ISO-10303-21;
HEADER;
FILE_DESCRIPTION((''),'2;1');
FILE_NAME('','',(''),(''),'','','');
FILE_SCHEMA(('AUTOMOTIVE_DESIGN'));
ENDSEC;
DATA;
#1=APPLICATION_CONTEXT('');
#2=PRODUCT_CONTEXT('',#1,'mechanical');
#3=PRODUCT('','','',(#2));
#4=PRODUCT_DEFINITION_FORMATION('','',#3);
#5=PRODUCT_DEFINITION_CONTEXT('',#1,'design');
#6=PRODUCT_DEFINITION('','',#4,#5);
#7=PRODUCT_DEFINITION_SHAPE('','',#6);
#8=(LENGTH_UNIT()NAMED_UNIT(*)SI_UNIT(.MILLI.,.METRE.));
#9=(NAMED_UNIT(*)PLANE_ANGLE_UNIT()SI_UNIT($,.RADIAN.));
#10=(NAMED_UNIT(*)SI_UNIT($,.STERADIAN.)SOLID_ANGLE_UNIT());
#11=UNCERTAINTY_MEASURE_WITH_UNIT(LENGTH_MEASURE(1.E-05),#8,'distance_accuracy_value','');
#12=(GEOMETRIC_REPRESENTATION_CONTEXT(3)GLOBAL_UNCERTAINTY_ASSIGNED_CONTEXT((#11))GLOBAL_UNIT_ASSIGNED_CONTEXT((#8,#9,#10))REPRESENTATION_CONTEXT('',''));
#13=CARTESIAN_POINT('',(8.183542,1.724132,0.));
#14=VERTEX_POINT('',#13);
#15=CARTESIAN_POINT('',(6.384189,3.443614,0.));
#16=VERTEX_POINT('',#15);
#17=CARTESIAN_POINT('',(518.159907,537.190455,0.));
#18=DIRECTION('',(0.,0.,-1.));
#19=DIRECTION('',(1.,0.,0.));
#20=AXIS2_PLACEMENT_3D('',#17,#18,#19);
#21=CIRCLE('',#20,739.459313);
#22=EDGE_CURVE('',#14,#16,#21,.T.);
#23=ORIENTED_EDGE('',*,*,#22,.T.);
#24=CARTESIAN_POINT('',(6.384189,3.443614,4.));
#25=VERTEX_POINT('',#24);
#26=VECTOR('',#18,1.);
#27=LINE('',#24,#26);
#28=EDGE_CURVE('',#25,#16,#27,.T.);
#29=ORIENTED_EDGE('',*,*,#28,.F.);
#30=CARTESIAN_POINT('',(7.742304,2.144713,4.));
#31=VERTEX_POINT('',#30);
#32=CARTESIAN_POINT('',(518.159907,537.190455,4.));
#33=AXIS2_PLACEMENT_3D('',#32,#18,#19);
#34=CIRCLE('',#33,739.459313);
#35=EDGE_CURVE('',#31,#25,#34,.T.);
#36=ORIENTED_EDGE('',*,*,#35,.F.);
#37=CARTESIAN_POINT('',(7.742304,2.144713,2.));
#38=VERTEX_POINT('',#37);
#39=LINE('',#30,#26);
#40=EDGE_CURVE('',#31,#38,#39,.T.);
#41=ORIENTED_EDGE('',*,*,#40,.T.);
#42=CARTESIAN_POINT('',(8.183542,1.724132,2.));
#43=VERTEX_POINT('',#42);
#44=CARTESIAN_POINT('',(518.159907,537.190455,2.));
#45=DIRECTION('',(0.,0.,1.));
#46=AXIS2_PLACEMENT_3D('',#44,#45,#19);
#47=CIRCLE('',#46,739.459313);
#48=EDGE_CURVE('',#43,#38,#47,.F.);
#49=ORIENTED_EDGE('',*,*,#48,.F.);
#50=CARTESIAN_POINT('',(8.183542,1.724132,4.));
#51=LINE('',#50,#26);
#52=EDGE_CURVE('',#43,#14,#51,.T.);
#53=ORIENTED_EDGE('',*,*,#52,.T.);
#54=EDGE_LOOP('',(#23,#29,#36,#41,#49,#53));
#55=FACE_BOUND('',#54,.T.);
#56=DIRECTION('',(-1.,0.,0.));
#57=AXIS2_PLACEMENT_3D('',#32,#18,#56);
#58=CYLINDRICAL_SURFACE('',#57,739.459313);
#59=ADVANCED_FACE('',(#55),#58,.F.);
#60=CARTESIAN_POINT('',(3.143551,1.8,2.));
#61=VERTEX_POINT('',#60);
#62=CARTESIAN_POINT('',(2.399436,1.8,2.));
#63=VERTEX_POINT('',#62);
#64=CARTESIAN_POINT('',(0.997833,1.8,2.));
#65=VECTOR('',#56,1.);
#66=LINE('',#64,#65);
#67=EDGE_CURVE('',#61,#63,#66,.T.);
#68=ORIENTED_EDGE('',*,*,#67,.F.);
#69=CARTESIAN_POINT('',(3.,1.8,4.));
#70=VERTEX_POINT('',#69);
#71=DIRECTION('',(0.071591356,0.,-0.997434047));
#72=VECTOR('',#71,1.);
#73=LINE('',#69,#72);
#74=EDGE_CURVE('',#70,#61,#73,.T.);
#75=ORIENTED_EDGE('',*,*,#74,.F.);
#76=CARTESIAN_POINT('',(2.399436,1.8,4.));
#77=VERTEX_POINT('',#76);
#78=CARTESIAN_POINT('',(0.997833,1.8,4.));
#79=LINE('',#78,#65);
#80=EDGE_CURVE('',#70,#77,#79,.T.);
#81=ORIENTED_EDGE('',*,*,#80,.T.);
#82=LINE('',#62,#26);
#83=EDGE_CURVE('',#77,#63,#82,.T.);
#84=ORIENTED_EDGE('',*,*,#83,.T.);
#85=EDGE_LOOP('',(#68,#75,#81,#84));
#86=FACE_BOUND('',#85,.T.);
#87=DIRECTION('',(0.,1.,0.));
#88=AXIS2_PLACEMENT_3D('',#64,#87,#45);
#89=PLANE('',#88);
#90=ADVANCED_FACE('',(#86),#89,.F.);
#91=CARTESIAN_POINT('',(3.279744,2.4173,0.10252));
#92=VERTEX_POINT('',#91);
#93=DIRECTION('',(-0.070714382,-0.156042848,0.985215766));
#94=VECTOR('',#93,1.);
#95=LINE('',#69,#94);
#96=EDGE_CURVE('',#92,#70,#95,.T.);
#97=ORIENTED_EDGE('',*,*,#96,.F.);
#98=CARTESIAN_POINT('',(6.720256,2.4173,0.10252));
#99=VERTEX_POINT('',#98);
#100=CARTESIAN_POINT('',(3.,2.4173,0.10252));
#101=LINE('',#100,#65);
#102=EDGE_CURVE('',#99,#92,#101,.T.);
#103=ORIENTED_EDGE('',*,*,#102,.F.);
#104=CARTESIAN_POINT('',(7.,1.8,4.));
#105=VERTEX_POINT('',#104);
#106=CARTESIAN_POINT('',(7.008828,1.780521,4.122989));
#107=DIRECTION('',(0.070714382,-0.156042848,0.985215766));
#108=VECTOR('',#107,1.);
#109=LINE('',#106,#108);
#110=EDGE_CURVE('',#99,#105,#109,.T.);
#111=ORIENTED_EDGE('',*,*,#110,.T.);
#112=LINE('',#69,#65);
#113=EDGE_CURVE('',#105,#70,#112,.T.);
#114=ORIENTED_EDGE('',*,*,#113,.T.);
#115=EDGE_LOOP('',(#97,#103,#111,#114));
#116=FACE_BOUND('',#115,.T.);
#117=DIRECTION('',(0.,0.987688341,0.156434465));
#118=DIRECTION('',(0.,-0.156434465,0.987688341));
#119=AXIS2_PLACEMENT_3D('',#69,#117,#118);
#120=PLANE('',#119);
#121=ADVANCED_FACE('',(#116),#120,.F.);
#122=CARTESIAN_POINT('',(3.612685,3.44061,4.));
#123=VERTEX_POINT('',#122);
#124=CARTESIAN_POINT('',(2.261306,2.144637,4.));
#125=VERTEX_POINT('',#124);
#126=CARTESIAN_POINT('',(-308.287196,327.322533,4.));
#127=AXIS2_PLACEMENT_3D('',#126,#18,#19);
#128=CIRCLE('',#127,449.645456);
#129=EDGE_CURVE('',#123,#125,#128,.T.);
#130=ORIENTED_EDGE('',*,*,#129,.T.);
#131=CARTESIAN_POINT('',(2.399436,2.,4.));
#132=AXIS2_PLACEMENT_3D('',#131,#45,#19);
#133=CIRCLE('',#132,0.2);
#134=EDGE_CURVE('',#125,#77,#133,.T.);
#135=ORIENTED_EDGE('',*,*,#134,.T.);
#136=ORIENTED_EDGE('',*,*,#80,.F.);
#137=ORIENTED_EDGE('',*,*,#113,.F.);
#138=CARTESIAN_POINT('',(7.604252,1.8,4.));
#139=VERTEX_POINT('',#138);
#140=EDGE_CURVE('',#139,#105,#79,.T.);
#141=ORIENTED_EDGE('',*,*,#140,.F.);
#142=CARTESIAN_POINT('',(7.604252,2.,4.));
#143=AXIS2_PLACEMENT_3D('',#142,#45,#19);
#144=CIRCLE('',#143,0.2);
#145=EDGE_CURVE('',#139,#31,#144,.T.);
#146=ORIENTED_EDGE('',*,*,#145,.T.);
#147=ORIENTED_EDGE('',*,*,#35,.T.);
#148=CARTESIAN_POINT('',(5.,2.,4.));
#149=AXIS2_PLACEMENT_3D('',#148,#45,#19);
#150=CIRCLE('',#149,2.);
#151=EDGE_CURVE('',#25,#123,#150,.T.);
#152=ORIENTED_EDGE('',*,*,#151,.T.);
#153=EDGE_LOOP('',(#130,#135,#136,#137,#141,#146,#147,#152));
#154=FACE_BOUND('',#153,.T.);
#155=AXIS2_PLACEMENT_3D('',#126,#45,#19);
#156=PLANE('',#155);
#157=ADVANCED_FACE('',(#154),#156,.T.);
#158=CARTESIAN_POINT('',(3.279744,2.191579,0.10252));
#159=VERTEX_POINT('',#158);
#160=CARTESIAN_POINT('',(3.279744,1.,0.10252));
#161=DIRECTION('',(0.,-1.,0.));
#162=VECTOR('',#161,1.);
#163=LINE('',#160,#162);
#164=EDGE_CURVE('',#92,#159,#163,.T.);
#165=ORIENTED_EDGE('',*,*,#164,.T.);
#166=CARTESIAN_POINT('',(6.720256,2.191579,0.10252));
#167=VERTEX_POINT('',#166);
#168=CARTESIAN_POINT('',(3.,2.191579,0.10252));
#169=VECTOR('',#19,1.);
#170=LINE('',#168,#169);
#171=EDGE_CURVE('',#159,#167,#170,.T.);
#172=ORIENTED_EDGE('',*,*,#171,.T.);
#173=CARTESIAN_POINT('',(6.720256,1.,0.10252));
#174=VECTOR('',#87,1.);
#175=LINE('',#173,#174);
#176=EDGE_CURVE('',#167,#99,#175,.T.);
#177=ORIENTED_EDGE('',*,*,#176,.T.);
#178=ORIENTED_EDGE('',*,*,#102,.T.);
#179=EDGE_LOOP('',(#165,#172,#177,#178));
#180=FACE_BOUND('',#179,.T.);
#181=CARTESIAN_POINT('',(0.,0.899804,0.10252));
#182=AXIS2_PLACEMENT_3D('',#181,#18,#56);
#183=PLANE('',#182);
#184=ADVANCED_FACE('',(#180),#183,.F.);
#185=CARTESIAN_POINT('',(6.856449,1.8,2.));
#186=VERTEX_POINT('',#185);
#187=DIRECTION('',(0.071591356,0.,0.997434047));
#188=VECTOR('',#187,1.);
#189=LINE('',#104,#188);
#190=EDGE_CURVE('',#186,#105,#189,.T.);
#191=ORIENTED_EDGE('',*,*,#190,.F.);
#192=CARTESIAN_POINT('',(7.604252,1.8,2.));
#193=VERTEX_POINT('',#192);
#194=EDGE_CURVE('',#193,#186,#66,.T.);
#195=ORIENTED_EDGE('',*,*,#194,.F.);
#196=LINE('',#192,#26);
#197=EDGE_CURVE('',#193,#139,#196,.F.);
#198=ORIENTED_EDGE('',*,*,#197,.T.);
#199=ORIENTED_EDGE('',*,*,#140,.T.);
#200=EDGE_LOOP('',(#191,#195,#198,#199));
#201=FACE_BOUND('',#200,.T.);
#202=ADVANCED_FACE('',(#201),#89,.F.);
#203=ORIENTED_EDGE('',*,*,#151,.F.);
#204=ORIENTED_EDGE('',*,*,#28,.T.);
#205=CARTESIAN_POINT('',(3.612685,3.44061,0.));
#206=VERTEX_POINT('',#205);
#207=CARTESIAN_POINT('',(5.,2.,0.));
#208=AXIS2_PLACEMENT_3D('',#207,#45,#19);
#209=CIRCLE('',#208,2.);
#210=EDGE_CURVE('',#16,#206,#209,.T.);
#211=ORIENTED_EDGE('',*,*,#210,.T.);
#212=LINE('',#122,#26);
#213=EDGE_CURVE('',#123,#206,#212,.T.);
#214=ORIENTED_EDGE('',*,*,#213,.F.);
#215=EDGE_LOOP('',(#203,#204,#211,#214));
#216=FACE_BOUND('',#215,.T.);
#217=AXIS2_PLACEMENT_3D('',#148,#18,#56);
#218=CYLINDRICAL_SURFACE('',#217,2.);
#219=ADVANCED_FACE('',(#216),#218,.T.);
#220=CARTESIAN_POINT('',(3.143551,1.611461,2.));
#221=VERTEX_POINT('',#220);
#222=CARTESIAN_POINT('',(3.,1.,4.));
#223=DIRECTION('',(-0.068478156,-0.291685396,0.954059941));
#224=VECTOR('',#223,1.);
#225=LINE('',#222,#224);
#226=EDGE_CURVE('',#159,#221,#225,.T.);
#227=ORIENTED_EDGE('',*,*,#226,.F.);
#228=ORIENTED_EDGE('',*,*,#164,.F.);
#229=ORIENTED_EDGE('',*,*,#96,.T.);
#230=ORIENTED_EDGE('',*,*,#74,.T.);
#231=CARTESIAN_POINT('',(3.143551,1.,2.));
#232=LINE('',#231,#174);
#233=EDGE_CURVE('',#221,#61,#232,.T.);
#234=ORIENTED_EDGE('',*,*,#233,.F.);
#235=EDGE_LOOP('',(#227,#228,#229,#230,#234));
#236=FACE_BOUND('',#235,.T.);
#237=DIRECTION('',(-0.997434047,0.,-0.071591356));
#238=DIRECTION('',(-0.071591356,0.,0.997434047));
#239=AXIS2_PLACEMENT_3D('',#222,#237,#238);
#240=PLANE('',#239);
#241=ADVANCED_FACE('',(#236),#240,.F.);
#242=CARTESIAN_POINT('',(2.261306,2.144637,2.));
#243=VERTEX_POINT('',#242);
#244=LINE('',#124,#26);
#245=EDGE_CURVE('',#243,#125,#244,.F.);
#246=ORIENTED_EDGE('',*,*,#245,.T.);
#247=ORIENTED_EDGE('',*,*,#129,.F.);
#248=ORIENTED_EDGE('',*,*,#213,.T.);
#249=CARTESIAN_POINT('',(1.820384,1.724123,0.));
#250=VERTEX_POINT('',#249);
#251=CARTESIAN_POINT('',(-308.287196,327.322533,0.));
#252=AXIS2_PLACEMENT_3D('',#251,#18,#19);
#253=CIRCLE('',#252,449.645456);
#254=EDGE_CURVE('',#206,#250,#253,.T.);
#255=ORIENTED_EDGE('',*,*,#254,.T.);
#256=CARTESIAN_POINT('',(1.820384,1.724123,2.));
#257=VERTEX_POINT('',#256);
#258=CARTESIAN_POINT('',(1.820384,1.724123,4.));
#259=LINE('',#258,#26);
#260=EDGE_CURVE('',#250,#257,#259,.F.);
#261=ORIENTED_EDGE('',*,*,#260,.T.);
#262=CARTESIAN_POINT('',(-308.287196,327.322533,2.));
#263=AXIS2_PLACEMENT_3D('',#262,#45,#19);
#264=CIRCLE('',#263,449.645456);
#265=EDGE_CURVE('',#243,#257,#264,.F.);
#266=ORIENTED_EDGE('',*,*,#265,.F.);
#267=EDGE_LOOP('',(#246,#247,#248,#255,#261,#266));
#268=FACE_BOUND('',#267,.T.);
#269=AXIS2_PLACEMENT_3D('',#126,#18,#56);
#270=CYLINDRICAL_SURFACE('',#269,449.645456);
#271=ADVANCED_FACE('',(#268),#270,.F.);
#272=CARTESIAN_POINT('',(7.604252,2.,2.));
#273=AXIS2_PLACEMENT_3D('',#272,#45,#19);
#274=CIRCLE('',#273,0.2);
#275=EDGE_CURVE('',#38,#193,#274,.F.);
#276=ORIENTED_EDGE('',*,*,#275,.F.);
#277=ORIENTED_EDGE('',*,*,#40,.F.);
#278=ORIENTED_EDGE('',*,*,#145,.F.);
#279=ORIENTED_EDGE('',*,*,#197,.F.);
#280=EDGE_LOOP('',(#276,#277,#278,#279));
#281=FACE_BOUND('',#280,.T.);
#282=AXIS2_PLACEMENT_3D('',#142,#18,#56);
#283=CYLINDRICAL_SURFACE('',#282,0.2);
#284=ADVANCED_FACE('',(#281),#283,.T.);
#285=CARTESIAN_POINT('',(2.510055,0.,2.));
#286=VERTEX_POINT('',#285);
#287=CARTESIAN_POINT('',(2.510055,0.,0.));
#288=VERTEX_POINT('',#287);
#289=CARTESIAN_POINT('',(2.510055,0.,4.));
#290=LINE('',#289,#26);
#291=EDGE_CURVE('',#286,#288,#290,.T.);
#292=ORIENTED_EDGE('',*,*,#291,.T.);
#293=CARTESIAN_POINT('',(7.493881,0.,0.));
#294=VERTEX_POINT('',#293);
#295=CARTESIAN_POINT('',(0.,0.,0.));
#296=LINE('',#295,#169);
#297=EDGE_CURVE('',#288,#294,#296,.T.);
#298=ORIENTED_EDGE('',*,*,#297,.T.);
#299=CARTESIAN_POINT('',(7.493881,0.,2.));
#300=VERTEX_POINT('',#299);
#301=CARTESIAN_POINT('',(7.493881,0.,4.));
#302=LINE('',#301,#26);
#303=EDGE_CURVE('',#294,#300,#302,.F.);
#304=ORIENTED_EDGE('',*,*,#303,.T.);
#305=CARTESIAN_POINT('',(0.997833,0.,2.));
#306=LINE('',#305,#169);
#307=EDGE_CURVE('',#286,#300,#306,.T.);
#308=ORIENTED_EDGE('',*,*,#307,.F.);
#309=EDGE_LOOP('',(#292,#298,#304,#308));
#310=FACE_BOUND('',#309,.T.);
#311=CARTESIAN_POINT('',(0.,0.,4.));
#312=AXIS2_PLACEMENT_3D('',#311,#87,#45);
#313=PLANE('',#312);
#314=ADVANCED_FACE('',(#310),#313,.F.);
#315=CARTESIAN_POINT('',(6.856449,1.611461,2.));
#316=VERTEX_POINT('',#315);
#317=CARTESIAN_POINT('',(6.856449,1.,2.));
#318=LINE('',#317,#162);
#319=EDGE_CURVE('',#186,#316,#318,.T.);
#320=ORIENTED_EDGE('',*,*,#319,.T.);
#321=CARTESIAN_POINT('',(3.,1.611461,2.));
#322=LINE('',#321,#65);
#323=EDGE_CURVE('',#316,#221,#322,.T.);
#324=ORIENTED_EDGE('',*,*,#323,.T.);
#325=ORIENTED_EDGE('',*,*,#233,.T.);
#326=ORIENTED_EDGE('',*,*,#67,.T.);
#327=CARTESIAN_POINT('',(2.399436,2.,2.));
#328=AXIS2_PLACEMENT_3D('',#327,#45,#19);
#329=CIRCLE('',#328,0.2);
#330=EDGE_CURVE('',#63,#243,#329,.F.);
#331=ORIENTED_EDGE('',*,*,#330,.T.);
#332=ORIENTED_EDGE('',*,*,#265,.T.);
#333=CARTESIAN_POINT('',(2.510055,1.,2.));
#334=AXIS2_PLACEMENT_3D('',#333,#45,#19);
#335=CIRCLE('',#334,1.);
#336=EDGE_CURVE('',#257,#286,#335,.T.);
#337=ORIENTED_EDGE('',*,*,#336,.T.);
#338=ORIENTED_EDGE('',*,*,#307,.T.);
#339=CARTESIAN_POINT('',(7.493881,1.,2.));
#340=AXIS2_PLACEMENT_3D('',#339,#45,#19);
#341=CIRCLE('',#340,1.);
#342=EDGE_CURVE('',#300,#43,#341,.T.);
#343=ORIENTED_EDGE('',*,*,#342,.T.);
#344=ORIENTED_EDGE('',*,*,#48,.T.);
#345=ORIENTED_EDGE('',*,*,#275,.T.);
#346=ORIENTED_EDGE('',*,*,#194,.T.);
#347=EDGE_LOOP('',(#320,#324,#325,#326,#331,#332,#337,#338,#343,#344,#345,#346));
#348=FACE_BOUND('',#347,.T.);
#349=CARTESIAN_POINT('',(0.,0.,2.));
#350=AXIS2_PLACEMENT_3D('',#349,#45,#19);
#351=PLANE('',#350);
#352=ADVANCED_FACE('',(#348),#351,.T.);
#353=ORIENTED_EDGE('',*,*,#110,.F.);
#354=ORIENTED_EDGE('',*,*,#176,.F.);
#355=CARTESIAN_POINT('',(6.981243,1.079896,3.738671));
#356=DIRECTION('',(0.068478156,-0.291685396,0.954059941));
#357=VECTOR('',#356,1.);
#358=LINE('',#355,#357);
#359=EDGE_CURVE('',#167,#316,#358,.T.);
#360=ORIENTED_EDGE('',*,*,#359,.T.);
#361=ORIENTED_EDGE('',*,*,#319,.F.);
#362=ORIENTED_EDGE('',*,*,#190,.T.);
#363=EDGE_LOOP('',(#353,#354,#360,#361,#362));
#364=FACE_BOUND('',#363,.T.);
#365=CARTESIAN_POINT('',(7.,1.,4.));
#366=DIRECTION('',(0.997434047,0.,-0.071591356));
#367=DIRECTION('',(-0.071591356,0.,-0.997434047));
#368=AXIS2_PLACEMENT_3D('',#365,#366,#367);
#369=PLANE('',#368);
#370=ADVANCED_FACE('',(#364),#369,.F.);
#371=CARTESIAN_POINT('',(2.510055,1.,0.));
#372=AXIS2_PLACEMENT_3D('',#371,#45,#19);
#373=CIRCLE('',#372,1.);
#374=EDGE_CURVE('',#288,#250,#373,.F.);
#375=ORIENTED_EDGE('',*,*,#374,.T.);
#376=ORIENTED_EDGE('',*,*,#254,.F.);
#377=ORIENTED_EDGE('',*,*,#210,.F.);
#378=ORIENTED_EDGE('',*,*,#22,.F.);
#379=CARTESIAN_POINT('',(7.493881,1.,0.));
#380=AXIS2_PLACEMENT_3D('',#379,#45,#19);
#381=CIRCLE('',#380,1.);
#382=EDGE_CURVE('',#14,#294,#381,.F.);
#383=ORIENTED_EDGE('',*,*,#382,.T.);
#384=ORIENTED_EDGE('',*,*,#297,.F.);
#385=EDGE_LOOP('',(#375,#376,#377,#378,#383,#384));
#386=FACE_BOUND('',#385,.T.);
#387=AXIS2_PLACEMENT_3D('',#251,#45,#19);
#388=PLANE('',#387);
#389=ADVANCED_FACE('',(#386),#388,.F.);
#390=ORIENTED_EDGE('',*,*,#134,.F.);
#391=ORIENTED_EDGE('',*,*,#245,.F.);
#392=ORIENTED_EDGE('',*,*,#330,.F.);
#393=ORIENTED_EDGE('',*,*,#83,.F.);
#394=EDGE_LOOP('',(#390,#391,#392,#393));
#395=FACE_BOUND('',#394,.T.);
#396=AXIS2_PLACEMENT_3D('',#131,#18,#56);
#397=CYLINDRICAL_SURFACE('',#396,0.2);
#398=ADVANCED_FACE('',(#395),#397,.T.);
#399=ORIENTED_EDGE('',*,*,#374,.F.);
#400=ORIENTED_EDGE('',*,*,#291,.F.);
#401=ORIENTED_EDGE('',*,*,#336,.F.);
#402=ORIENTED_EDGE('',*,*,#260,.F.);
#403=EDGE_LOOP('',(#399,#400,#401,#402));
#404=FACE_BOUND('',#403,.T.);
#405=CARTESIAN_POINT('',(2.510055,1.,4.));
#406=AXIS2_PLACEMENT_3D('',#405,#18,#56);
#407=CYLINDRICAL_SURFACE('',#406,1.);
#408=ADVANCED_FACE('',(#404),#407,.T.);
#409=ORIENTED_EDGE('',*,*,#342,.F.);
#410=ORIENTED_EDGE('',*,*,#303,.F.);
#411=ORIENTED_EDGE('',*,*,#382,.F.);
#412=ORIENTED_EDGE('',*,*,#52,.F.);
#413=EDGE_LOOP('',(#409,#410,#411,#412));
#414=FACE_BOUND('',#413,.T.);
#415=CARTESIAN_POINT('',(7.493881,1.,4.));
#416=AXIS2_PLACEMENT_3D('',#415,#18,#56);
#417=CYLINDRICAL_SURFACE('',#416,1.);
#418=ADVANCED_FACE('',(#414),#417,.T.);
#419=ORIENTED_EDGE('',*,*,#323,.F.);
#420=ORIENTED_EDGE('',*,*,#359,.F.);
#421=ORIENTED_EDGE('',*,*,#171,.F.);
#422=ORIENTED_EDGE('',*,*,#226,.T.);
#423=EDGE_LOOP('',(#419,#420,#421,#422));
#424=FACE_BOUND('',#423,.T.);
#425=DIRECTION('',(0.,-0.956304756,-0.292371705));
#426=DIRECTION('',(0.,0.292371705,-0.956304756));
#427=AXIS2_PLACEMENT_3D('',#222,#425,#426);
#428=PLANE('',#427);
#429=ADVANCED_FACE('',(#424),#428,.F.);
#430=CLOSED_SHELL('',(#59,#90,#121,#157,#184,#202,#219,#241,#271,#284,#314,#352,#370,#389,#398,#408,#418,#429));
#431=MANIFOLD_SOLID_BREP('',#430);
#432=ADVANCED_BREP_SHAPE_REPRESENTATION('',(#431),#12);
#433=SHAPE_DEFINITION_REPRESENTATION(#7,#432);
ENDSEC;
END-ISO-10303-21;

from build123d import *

# Parameters (mm, degrees)
BOSS_EXTRUDE1_DEPTH = 4
SKETCH4_W           = 8
SKETCH4_H           = 1.8
CUT_EXTRUDE2_DEPTH  = 2
FILLET1_R           = 1
FILLET2_R           = 0.2


with BuildPart() as part:
    # Sketch1 → Boss-Extrude1 (new body)
    with BuildSketch(Plane.XY):
        with BuildLine():
            Line((0, 0), (10, 0))
            ThreePointArc((10, 0), (8.189187828, 1.718754897), (6.384188985, 3.443613817))
            ThreePointArc((6.384188985, 3.443613817), (4.997832528, 3.999998826), (3.612685275, 3.440610236))
            ThreePointArc((3.612685275, 3.440610236), (1.811114467, 1.715294636), (0, 0))
        make_face()
    extrude(amount=BOSS_EXTRUDE1_DEPTH)

    # Cut-Extrude1: read off the stored shape, not the designer's step
    # Cut-Extrude1: loft between two sections, ruled curve by curve
    cut_extrude1_from = [
        Edge.make_line((3.279743704, 2.191579296, 0.102519741), (3.279743704, 2.41730023, 0.102519741)),
        Edge.make_line((3.279743704, 2.41730023, 0.102519741), (6.720256296, 2.41730023, 0.102519741)),
        Edge.make_line((6.720256296, 2.41730023, 0.102519741), (6.720256296, 2.191579296, 0.102519741)),
        Edge.make_line((6.720256296, 2.191579296, 0.102519741), (3.279743704, 2.191579296, 0.102519741)),
    ]
    cut_extrude1_to = [
        Edge.make_line((3, 1, 4), (3, 1.8, 4)),
        Edge.make_line((3, 1.8, 4), (7, 1.8, 4)),
        Edge.make_line((7, 1.8, 4), (7, 1, 4)),
        Edge.make_line((7, 1, 4), (3, 1, 4)),
    ]
    cut_extrude1 = Solid(Shell([*[Face.make_surface_from_curves(cut_extrude1_from[k], cut_extrude1_to[k]) for k in range(4)], Face(Wire(cut_extrude1_from)), Face(Wire(cut_extrude1_to))]))
    add(cut_extrude1, mode=Mode.SUBTRACT)

    # Sketch4 → Cut-Extrude2 (cut)
    with BuildSketch(Plane.XY.offset(4)):
        with Locations((4.997832528, 0.9)):
            Rectangle(SKETCH4_W, SKETCH4_H)
    extrude(amount=-CUT_EXTRUDE2_DEPTH, mode=Mode.SUBTRACT)

    # Fillet1
    fillet1_edges = [part.edges().sort_by_distance(p)[0] for p in [
        (0, 0, 2),
        (10, 0, 2),
    ]]
    fillet(fillet1_edges, radius=FILLET1_R)

    # Fillet2
    fillet2_edges = [part.edges().sort_by_distance(p)[0] for p in [
        (1.900031879, 1.8, 3),
        (8.103893685, 1.8, 3),
    ]]
    fillet(fillet2_edges, radius=FILLET2_R)


solid = part.part
